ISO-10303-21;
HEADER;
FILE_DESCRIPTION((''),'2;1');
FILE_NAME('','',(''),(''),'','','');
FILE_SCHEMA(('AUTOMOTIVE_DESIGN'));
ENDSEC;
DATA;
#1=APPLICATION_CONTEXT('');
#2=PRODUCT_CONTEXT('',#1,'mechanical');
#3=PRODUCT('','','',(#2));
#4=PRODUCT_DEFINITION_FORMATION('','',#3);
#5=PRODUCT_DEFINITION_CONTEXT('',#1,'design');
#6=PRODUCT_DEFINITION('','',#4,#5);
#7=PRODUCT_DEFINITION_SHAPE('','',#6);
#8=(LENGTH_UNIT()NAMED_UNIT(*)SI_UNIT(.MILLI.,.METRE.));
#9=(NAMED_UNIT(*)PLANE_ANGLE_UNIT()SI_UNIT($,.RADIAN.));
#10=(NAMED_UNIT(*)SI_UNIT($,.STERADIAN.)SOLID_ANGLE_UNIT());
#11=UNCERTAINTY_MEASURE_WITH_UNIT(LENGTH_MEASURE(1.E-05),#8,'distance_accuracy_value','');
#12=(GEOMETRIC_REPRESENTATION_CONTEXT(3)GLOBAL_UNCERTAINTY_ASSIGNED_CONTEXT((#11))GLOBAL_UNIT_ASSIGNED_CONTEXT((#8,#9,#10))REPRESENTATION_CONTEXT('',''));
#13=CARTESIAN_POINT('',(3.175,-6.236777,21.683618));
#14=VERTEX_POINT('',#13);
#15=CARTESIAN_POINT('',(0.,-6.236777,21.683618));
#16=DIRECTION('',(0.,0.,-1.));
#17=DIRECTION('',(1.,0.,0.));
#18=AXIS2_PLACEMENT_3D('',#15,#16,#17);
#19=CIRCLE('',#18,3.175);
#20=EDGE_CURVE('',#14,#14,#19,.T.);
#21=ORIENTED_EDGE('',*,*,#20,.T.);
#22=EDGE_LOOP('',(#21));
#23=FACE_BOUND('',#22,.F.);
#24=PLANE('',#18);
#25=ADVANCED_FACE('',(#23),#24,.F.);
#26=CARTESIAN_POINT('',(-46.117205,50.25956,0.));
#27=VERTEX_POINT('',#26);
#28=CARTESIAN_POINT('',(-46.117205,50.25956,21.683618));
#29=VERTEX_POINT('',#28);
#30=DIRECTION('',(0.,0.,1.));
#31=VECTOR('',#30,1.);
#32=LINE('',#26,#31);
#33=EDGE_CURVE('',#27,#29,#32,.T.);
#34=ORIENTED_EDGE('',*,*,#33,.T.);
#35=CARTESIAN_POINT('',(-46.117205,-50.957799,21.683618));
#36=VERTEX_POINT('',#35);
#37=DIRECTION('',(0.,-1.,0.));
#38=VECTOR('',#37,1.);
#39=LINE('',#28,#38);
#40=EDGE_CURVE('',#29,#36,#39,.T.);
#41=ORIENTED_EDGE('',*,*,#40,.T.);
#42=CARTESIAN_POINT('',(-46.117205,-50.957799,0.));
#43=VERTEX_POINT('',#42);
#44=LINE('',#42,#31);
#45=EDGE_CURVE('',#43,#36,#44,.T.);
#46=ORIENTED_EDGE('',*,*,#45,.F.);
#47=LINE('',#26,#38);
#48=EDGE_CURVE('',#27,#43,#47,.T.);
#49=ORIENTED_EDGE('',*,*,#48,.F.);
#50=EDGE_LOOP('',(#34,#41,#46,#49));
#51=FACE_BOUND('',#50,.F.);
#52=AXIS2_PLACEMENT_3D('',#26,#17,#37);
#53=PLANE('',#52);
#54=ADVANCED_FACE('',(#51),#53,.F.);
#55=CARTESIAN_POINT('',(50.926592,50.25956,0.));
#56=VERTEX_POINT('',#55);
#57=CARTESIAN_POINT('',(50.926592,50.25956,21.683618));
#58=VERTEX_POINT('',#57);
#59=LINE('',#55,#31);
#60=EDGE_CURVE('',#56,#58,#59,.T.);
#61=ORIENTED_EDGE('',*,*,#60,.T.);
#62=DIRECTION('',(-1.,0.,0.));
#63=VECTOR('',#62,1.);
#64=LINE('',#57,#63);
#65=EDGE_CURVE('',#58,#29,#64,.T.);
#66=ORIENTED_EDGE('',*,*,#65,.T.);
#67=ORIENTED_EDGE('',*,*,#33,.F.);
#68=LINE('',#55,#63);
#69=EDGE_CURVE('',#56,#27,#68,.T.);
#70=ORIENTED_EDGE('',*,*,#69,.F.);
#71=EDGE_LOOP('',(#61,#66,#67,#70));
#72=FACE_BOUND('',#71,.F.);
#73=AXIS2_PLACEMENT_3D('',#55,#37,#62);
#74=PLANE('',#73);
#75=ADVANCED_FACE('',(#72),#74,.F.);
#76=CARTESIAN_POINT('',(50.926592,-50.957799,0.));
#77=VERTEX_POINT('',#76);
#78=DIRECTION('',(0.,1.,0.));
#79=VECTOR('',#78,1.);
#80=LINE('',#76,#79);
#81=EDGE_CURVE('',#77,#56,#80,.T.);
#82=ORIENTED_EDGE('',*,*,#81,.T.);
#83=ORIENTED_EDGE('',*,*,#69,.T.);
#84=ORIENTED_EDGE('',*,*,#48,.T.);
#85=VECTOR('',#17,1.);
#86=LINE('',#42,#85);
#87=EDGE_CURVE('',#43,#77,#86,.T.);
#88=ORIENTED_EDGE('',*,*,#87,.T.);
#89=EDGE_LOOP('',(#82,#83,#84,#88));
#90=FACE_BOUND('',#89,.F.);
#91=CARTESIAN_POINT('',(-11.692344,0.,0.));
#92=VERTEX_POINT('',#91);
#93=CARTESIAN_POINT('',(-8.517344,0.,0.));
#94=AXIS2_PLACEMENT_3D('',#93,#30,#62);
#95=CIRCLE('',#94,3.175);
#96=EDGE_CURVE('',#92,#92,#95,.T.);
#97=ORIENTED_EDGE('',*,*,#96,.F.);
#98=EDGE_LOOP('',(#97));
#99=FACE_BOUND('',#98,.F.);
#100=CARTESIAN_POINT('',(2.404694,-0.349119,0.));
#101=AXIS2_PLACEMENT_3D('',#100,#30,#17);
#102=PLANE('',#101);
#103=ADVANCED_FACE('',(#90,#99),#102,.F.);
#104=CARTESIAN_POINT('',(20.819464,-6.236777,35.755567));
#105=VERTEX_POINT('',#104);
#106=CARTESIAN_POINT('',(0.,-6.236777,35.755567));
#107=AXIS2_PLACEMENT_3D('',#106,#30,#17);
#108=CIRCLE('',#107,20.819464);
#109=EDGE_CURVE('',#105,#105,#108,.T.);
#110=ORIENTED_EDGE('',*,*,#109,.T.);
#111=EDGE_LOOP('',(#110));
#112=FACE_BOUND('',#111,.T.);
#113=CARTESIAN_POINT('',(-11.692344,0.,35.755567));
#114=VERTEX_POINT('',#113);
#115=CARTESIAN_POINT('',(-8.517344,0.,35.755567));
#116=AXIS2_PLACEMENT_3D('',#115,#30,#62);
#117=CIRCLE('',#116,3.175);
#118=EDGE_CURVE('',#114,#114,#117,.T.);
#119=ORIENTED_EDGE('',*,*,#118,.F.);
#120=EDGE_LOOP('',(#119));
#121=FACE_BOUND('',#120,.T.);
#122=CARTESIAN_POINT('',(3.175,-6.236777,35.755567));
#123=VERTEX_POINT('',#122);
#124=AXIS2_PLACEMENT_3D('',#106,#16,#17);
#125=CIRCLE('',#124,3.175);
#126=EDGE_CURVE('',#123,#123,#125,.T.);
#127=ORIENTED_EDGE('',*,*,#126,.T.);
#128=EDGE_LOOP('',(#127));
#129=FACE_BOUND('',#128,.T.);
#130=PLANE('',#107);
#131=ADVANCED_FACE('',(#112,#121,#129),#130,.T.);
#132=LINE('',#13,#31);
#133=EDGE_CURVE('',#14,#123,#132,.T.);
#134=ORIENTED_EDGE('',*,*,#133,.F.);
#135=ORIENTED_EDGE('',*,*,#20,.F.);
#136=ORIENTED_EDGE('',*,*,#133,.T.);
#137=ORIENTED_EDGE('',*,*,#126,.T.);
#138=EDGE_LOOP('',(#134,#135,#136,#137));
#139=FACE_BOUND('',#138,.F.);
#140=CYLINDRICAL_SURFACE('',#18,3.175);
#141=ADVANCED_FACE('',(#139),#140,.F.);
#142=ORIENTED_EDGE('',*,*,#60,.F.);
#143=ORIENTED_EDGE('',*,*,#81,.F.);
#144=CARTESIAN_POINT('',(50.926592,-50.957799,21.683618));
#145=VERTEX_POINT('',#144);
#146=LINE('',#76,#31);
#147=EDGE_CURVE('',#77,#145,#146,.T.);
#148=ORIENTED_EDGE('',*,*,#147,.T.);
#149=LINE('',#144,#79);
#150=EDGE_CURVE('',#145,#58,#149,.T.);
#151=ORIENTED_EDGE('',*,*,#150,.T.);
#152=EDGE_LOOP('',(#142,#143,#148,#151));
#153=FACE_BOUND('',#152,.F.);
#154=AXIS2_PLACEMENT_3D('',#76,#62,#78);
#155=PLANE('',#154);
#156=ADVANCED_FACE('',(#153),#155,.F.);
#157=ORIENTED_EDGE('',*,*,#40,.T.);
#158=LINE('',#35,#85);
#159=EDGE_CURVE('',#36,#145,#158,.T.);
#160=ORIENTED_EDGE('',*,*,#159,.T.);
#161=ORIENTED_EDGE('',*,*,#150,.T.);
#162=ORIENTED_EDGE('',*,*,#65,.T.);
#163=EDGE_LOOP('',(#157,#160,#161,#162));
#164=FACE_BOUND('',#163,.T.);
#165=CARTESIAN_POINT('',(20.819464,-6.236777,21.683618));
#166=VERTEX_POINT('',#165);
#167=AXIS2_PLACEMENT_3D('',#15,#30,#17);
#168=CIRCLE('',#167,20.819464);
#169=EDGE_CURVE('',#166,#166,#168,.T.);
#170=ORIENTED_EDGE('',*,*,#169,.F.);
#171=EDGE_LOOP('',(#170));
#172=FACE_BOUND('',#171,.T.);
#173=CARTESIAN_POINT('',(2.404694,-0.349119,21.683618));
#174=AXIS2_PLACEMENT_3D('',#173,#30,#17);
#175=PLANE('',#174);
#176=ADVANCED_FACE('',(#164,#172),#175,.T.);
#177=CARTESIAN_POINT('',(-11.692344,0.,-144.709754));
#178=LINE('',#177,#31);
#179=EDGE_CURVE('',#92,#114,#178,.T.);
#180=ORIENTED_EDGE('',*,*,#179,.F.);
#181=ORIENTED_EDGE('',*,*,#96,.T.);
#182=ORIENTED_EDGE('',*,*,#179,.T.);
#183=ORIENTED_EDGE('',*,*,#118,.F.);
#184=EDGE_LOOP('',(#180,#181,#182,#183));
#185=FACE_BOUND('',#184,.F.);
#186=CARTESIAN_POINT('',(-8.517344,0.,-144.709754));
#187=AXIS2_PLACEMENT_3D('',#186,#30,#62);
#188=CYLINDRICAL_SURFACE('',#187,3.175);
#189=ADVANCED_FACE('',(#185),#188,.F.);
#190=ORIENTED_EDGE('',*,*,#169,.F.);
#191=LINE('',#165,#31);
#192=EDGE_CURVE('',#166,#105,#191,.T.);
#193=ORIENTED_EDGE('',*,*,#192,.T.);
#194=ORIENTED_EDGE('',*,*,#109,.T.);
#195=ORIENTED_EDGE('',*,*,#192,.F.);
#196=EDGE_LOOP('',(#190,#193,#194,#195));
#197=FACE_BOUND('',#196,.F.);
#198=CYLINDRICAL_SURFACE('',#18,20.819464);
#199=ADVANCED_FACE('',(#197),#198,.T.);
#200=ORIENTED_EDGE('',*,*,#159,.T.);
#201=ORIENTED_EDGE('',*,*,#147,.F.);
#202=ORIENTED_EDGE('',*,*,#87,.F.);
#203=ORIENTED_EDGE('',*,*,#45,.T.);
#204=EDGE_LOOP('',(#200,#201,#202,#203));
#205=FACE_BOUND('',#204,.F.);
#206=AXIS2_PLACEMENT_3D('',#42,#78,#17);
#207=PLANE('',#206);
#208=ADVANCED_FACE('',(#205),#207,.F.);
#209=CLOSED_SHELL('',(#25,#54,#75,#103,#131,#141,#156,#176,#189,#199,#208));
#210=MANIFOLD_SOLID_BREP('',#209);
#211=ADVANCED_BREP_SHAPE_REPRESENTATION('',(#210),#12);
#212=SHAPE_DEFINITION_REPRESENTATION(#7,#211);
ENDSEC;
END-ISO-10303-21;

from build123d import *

# Parameters (mm, degrees)
F1_DEPTH   = 21.6836184263
F2_R       = 20.8194643485
F3_DEPTH   = 14.0719488263
F7_D       = 6.35
F7_DEPTH   = 14.0729488263
F7_ON_F6_D = 6.35


# Not quite as in the source:
# - the program builds the solid bodies; features that only make, move or delete a surface that nothing else refers to are left out


with BuildPart() as f1:
    # F0 (on Top) → F1 (new body)
    with BuildSketch(Plane.XY):
        Polygon((50.926592201, 50.2595603466), (-46.1172051728, 50.2595603466), (-46.1172051728, -50.9577989578), (50.926592201, -50.9577989578), (50.926592201, 48.6862957478), align=None)
    extrude(amount=F1_DEPTH)

    # F2 (on face) → F3 (join)
    with BuildSketch(Plane.XY.offset(21.6836184263)):
        with Locations((0, -6.2367771752)):
            Circle(F2_R)
    extrude(amount=F3_DEPTH)

    # F7 (through all, one way)
    with BuildSketch(Plane(origin=(0, 0, 21.6836184263), x_dir=(1, 0, 0), z_dir=(0, 0, -1))):
        with Locations((0, 6.2367771752)):
            Circle(F7_D / 2)
    extrude(amount=-F7_DEPTH, mode=Mode.SUBTRACT)

    # F7 on F6 (through all)
    with Locations(Plane(origin=(0, 0, 0), x_dir=(1, 0, 0), z_dir=(0, 0, -1))):
        with Locations((-8.5173435509, 0)):
            Hole(F7_ON_F6_D / 2)


solid = f1.part
